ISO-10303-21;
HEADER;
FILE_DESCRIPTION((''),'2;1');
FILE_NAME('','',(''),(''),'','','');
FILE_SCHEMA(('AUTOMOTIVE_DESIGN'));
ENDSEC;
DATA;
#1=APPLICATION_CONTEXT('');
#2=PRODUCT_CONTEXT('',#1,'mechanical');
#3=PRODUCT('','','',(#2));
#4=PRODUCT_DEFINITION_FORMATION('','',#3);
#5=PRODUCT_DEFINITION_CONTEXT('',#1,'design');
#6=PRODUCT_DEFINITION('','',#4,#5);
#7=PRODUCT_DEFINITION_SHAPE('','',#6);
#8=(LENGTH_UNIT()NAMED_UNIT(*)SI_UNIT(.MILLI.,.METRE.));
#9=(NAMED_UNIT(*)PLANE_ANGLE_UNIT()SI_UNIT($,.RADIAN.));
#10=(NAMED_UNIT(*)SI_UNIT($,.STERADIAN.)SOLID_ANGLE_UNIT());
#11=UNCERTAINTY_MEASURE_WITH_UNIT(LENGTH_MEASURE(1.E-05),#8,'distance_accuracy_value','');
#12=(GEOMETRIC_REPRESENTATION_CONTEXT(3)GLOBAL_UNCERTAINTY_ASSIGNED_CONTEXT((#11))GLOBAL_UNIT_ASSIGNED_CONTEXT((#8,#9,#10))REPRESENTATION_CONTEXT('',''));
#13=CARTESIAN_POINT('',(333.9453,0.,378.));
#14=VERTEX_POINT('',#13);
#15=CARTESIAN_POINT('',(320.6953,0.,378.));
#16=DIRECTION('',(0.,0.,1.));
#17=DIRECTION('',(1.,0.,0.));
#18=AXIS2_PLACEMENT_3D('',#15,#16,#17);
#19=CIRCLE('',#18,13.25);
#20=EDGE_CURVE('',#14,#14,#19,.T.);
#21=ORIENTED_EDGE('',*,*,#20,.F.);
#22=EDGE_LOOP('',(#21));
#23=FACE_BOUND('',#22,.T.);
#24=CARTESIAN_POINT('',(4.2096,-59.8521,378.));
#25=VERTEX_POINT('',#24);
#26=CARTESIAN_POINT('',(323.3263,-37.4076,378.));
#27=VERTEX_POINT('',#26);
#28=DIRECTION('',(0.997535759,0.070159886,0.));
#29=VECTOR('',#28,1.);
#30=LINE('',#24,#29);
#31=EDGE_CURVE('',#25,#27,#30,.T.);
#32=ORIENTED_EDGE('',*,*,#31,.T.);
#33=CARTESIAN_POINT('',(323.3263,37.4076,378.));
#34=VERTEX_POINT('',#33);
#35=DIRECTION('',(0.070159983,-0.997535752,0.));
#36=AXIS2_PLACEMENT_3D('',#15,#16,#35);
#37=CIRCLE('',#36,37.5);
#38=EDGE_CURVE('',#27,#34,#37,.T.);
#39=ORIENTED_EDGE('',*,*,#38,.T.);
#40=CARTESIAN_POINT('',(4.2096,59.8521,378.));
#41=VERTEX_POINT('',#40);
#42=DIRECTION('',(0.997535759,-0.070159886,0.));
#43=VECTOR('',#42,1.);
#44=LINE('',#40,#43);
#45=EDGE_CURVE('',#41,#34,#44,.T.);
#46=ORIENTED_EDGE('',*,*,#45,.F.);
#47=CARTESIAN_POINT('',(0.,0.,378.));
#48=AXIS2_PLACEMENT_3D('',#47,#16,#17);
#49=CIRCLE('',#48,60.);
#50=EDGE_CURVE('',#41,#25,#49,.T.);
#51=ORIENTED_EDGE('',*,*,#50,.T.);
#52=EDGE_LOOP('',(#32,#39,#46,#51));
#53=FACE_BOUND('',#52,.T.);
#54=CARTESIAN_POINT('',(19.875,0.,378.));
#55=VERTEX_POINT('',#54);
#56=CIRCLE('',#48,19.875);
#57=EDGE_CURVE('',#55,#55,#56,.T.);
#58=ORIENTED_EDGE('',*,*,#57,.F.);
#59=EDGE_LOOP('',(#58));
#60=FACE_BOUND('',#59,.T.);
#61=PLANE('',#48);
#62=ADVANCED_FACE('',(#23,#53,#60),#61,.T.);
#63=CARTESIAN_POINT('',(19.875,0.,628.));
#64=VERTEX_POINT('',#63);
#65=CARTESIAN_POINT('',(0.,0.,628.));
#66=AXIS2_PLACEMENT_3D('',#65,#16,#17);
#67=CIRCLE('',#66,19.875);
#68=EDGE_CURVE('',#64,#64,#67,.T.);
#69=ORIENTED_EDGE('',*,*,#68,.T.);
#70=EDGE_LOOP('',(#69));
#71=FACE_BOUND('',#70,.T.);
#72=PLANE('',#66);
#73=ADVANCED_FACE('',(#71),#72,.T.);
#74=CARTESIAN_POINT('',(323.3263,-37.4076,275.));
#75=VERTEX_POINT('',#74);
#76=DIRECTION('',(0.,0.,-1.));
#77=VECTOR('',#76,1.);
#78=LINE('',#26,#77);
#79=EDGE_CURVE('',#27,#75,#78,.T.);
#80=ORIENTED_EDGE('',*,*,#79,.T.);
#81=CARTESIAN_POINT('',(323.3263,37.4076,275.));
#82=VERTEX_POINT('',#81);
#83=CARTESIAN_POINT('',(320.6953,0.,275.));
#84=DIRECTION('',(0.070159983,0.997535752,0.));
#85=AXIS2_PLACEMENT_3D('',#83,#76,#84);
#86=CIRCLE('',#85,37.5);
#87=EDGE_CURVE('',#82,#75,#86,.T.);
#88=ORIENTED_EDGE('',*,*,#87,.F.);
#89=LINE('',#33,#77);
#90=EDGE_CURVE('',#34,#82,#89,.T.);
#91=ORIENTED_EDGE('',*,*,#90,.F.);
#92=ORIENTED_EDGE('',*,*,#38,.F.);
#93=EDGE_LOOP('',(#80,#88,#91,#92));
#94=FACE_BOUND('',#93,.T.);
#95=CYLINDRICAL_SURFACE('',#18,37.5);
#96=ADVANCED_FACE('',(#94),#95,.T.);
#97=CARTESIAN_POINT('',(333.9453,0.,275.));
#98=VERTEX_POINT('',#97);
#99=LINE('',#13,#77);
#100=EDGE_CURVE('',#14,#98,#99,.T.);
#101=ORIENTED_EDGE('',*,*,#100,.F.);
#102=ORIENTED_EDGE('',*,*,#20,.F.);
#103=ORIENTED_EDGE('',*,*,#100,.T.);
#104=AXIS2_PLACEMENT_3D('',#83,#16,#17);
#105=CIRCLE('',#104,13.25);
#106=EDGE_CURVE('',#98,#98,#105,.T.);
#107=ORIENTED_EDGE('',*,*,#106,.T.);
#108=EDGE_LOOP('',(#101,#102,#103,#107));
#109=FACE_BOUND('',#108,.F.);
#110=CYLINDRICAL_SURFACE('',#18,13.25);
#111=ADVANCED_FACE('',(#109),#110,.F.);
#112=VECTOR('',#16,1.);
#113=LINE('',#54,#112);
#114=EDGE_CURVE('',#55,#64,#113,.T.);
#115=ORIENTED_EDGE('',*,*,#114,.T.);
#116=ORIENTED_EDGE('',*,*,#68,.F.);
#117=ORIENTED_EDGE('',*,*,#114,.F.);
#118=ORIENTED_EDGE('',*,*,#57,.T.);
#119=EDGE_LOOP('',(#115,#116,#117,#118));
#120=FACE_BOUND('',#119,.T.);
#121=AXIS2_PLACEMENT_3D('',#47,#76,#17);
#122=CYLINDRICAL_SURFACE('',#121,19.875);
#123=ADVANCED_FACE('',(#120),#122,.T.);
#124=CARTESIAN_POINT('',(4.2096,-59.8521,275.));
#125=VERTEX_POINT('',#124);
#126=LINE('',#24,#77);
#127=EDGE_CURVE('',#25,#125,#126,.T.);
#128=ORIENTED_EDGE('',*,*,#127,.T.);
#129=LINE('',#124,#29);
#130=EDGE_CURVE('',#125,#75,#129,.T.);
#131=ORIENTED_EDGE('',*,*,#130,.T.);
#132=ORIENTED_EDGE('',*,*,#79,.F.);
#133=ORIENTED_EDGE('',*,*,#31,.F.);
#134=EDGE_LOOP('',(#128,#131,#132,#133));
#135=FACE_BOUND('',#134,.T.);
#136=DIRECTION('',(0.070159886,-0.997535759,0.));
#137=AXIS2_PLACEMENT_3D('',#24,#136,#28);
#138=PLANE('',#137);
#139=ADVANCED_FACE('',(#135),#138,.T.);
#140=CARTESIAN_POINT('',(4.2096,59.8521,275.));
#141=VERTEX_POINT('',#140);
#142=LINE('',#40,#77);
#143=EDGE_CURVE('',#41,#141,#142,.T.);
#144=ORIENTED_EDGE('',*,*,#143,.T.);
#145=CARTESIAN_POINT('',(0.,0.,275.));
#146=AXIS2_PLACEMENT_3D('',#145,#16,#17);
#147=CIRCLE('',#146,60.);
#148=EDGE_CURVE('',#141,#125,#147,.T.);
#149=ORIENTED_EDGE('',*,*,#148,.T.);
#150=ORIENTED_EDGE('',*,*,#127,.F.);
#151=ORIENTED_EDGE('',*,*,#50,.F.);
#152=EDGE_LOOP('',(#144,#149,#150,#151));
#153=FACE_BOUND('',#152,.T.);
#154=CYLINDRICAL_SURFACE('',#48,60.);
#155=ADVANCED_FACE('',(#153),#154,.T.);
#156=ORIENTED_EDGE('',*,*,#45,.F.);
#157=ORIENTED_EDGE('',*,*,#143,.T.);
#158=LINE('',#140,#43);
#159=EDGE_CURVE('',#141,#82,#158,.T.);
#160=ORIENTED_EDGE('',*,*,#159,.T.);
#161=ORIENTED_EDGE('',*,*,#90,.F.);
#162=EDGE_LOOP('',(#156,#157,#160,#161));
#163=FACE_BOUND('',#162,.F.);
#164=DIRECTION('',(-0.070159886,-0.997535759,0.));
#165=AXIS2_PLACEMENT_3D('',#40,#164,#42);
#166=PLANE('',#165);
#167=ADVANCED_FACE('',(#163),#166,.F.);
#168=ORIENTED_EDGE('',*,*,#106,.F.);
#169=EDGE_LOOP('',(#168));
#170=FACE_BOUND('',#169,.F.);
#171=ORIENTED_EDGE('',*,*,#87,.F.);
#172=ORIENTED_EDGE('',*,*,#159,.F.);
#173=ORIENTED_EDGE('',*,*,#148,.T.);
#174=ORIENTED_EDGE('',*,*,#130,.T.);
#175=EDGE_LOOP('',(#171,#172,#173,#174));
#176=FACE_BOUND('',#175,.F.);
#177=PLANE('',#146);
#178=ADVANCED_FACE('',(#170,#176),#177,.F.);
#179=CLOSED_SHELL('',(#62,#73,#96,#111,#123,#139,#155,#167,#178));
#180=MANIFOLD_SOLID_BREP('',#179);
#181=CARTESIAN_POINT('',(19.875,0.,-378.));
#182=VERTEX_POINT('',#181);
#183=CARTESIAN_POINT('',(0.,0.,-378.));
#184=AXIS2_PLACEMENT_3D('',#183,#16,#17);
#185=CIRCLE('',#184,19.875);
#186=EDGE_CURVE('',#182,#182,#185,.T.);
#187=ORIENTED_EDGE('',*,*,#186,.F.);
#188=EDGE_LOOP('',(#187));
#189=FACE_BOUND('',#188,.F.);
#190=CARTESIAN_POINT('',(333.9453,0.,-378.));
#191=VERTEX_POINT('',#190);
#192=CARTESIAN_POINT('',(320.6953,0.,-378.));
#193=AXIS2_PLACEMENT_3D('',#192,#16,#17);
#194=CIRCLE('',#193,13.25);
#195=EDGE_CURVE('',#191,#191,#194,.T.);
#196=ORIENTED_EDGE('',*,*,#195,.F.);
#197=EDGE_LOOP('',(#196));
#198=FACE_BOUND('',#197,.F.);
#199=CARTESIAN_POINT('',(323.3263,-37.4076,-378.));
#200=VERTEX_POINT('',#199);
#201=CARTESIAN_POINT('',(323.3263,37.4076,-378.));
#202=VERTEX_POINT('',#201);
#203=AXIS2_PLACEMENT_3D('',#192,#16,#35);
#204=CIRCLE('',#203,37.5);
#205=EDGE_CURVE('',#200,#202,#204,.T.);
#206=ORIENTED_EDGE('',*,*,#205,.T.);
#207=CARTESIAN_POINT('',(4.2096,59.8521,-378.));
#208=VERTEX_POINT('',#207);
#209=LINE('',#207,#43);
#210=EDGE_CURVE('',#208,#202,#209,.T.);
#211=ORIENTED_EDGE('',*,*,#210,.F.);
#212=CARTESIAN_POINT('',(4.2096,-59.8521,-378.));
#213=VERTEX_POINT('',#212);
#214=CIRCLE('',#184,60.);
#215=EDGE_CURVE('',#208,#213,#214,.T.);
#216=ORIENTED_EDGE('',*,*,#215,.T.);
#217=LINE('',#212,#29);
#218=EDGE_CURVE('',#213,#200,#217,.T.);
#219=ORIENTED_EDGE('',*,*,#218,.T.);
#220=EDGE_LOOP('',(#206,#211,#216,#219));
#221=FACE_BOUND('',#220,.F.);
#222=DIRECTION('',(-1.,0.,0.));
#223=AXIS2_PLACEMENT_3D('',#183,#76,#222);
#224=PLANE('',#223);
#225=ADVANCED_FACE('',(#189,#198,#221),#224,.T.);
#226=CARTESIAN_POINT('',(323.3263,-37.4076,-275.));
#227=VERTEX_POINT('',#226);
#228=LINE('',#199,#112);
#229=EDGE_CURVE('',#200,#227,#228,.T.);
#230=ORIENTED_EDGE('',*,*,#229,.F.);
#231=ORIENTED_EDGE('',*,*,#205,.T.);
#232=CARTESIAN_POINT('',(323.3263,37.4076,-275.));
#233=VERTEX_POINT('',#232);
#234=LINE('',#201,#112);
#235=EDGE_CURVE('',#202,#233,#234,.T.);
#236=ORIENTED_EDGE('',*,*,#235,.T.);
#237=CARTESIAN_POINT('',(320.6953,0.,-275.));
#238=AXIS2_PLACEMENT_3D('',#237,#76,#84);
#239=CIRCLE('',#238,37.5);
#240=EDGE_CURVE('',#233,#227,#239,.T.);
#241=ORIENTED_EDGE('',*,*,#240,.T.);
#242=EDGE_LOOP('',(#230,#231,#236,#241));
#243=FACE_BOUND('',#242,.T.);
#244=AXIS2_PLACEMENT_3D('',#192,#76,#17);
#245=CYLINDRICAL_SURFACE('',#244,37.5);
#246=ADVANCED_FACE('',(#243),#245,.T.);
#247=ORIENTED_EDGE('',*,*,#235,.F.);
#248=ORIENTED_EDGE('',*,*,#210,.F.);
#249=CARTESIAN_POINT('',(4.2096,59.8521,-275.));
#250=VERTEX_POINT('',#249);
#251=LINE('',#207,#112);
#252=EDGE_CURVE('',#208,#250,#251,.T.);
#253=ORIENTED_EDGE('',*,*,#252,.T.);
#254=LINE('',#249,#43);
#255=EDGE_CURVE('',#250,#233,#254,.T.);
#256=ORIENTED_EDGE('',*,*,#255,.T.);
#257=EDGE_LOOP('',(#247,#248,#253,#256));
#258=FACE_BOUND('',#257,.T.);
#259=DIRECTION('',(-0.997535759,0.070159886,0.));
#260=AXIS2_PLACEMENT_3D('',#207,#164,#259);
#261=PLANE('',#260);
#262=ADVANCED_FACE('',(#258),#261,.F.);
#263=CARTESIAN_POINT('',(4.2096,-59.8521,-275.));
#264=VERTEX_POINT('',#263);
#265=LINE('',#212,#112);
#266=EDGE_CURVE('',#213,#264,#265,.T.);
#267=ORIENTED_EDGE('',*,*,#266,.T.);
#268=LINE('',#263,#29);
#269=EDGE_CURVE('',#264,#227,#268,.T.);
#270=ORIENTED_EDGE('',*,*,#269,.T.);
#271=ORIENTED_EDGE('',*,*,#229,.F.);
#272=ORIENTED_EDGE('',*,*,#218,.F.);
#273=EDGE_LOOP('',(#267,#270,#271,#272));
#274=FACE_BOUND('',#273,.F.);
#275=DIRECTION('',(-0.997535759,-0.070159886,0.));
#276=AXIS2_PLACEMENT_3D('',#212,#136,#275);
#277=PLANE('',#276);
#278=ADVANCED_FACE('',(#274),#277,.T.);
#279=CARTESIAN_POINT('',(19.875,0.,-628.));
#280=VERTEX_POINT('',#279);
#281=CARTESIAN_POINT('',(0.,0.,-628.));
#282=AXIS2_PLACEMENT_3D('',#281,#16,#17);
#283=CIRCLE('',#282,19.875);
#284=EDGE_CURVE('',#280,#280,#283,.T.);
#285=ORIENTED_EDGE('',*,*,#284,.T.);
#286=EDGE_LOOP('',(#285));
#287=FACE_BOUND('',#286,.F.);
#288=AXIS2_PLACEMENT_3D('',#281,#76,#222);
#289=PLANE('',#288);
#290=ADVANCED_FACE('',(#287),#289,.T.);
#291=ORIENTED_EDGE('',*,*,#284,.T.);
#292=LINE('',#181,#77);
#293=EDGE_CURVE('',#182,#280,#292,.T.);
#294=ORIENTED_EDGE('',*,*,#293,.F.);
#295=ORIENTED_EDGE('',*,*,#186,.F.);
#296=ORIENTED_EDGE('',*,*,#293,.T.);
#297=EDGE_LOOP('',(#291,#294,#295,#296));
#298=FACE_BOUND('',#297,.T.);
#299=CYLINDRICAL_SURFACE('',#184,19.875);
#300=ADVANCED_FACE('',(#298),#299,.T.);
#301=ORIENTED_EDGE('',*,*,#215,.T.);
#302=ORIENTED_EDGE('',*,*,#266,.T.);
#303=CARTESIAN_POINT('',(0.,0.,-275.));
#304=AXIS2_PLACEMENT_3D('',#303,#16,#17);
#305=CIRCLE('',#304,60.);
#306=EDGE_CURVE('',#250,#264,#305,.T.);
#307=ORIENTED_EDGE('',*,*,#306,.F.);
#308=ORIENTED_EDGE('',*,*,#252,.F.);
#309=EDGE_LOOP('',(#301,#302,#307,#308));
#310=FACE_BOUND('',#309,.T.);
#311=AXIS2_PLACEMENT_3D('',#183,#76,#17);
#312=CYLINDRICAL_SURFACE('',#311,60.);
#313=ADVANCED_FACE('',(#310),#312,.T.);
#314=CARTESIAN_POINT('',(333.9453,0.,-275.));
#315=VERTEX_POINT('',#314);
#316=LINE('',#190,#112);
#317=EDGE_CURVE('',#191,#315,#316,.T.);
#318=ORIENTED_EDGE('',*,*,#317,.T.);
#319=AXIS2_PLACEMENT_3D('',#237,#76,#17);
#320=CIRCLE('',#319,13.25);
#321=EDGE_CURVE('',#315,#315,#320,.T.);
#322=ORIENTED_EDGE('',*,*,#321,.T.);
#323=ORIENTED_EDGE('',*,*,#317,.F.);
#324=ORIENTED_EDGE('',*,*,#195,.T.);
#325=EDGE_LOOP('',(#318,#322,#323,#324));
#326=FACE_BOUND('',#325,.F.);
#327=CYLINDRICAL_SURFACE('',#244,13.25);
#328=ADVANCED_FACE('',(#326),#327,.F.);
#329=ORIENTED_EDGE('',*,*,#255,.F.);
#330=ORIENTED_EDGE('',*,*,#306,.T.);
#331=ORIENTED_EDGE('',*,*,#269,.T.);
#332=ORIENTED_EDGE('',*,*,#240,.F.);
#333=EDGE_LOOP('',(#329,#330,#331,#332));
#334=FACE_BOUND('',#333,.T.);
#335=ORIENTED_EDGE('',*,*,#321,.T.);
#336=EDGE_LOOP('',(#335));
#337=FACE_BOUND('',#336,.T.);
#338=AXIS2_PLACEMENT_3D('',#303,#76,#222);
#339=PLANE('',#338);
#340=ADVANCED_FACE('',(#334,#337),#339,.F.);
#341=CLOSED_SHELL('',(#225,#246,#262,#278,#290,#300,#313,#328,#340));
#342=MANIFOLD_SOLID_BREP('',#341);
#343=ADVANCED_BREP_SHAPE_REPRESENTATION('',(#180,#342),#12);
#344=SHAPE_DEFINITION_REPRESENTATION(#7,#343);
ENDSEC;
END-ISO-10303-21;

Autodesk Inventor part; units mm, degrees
ref_plane "YZ Plane" through (0, 0, 0) normal (1, 0, 0) x (0, 1, 0)
ref_plane "XZ Plane" through (0, 0, 0) normal (0, 1, 0) x (-1, 0, 0)
ref_plane "工作平面1" through (0, 0, 378) normal (0, 0, 1) x (1, 0, 0)
sketch "草圖1" plane through (0, 0, 378) normal (0, 0, 1) x (1, 0, 0)
  line L0 (0, 0) -> (320.6953, 0) construction
  circle A0 centre (0, 0) radius 60
  circle A1 centre (320.6953, 0) radius 37.5
  line L1 (4.2096, 59.8521) -> (323.3263, 37.4076)
  line L2 (4.2096, -59.8521) -> (323.3263, -37.4076)
  point P0 (-31.7926, 50.8845)
  dimension "d3" = 320.6953
  dimension "d4" = 120
  dimension "d6" = 75
extrude "擠出1" add sketch "草圖1" against normal blind 103
sketch "草圖2" plane through (0, 0, 378) normal (0, 0, 1) x (1, 0, 0)
  arc A0 (4.2096, 59.8521) -> (4.2096, -59.8521) centre (0, 0) ccw projected
  arc A1 (323.3263, -37.4076) -> (323.3263, 37.4076) centre (320.6953, 0) ccw projected
  circle A2 centre (320.6953, 0) radius 13.25
  point P0 (70.7107, 70.7107)
  dimension "d13" = 26.5
extrude "擠出2" cut sketch "草圖2" against normal through all
sketch "草圖8" plane through (0, 0, 378) normal (0, 0, 1) x (1, 0, 0)
  circle A0 centre (0, 0) radius 19.875
  dimension "d51" = 39.75
extrude "擠出3" add sketch "草圖8" along normal blind 250
sketch "草圖3" plane through (323.3263, 37.4076, 378) normal (0.0701601, 0.9975357, 0) x (0.9975357, -0.0701601, 0)
  line L0 (0, 0) -> (0, 103) projected
  point P0 (-319.905, 378)
  point P1 (0, 51.5)
hole "孔1" [suppressed]
sketch "草圖5" plane through (11.1138, -59.3666, 275) normal (-0.0701601, 0.9975357, 0) x (0, 0, 1)
  line L0 (103, 312.9838) -> (0, 312.9838) projected
  point P0 (-275, -6.9212)
  point P1 (51.5, 312.9838)
hole "孔3" [suppressed]
mirror "鏡射1" about plane through (0, 0, 0) normal (0, 0, 1) of "擠出1", "擠出2", "擠出3"
equation "\"d3\" = R4"
equation "\"R4\" = T1A_R4"
equation "\"th4a\" = T1A_th4a"
equation "\"Width\" = T1A_R4_Width"
equation "\"d0\" = 0.5 * Width"
equation "\"T1A_R4\" = 320.6953"
equation "\"T1A_th4a\" = 45deg"
equation "\"T1A_R4_Width\" = 756"
equation "\"T1A_R1\" = 585.5331"
equation "\"T1A_R3\" = 252.3048"
equation "\"T1A_R5\" = 419.3047"
equation "\"T1A_R7\" = -221.7475"
equation "\"T1A_R8\" = 369.2781"
equation "\"T1A_R1_Width\" = 756"
equation "\"T1A_R2_Width\" = 756"
equation "\"T1A_R3_Width\" = 344"
equation "\"T1A_Joint_Width\" = 756"
properties part number "Type 1A R4主滑台曲柄:1" material "密度7850的鋼"
